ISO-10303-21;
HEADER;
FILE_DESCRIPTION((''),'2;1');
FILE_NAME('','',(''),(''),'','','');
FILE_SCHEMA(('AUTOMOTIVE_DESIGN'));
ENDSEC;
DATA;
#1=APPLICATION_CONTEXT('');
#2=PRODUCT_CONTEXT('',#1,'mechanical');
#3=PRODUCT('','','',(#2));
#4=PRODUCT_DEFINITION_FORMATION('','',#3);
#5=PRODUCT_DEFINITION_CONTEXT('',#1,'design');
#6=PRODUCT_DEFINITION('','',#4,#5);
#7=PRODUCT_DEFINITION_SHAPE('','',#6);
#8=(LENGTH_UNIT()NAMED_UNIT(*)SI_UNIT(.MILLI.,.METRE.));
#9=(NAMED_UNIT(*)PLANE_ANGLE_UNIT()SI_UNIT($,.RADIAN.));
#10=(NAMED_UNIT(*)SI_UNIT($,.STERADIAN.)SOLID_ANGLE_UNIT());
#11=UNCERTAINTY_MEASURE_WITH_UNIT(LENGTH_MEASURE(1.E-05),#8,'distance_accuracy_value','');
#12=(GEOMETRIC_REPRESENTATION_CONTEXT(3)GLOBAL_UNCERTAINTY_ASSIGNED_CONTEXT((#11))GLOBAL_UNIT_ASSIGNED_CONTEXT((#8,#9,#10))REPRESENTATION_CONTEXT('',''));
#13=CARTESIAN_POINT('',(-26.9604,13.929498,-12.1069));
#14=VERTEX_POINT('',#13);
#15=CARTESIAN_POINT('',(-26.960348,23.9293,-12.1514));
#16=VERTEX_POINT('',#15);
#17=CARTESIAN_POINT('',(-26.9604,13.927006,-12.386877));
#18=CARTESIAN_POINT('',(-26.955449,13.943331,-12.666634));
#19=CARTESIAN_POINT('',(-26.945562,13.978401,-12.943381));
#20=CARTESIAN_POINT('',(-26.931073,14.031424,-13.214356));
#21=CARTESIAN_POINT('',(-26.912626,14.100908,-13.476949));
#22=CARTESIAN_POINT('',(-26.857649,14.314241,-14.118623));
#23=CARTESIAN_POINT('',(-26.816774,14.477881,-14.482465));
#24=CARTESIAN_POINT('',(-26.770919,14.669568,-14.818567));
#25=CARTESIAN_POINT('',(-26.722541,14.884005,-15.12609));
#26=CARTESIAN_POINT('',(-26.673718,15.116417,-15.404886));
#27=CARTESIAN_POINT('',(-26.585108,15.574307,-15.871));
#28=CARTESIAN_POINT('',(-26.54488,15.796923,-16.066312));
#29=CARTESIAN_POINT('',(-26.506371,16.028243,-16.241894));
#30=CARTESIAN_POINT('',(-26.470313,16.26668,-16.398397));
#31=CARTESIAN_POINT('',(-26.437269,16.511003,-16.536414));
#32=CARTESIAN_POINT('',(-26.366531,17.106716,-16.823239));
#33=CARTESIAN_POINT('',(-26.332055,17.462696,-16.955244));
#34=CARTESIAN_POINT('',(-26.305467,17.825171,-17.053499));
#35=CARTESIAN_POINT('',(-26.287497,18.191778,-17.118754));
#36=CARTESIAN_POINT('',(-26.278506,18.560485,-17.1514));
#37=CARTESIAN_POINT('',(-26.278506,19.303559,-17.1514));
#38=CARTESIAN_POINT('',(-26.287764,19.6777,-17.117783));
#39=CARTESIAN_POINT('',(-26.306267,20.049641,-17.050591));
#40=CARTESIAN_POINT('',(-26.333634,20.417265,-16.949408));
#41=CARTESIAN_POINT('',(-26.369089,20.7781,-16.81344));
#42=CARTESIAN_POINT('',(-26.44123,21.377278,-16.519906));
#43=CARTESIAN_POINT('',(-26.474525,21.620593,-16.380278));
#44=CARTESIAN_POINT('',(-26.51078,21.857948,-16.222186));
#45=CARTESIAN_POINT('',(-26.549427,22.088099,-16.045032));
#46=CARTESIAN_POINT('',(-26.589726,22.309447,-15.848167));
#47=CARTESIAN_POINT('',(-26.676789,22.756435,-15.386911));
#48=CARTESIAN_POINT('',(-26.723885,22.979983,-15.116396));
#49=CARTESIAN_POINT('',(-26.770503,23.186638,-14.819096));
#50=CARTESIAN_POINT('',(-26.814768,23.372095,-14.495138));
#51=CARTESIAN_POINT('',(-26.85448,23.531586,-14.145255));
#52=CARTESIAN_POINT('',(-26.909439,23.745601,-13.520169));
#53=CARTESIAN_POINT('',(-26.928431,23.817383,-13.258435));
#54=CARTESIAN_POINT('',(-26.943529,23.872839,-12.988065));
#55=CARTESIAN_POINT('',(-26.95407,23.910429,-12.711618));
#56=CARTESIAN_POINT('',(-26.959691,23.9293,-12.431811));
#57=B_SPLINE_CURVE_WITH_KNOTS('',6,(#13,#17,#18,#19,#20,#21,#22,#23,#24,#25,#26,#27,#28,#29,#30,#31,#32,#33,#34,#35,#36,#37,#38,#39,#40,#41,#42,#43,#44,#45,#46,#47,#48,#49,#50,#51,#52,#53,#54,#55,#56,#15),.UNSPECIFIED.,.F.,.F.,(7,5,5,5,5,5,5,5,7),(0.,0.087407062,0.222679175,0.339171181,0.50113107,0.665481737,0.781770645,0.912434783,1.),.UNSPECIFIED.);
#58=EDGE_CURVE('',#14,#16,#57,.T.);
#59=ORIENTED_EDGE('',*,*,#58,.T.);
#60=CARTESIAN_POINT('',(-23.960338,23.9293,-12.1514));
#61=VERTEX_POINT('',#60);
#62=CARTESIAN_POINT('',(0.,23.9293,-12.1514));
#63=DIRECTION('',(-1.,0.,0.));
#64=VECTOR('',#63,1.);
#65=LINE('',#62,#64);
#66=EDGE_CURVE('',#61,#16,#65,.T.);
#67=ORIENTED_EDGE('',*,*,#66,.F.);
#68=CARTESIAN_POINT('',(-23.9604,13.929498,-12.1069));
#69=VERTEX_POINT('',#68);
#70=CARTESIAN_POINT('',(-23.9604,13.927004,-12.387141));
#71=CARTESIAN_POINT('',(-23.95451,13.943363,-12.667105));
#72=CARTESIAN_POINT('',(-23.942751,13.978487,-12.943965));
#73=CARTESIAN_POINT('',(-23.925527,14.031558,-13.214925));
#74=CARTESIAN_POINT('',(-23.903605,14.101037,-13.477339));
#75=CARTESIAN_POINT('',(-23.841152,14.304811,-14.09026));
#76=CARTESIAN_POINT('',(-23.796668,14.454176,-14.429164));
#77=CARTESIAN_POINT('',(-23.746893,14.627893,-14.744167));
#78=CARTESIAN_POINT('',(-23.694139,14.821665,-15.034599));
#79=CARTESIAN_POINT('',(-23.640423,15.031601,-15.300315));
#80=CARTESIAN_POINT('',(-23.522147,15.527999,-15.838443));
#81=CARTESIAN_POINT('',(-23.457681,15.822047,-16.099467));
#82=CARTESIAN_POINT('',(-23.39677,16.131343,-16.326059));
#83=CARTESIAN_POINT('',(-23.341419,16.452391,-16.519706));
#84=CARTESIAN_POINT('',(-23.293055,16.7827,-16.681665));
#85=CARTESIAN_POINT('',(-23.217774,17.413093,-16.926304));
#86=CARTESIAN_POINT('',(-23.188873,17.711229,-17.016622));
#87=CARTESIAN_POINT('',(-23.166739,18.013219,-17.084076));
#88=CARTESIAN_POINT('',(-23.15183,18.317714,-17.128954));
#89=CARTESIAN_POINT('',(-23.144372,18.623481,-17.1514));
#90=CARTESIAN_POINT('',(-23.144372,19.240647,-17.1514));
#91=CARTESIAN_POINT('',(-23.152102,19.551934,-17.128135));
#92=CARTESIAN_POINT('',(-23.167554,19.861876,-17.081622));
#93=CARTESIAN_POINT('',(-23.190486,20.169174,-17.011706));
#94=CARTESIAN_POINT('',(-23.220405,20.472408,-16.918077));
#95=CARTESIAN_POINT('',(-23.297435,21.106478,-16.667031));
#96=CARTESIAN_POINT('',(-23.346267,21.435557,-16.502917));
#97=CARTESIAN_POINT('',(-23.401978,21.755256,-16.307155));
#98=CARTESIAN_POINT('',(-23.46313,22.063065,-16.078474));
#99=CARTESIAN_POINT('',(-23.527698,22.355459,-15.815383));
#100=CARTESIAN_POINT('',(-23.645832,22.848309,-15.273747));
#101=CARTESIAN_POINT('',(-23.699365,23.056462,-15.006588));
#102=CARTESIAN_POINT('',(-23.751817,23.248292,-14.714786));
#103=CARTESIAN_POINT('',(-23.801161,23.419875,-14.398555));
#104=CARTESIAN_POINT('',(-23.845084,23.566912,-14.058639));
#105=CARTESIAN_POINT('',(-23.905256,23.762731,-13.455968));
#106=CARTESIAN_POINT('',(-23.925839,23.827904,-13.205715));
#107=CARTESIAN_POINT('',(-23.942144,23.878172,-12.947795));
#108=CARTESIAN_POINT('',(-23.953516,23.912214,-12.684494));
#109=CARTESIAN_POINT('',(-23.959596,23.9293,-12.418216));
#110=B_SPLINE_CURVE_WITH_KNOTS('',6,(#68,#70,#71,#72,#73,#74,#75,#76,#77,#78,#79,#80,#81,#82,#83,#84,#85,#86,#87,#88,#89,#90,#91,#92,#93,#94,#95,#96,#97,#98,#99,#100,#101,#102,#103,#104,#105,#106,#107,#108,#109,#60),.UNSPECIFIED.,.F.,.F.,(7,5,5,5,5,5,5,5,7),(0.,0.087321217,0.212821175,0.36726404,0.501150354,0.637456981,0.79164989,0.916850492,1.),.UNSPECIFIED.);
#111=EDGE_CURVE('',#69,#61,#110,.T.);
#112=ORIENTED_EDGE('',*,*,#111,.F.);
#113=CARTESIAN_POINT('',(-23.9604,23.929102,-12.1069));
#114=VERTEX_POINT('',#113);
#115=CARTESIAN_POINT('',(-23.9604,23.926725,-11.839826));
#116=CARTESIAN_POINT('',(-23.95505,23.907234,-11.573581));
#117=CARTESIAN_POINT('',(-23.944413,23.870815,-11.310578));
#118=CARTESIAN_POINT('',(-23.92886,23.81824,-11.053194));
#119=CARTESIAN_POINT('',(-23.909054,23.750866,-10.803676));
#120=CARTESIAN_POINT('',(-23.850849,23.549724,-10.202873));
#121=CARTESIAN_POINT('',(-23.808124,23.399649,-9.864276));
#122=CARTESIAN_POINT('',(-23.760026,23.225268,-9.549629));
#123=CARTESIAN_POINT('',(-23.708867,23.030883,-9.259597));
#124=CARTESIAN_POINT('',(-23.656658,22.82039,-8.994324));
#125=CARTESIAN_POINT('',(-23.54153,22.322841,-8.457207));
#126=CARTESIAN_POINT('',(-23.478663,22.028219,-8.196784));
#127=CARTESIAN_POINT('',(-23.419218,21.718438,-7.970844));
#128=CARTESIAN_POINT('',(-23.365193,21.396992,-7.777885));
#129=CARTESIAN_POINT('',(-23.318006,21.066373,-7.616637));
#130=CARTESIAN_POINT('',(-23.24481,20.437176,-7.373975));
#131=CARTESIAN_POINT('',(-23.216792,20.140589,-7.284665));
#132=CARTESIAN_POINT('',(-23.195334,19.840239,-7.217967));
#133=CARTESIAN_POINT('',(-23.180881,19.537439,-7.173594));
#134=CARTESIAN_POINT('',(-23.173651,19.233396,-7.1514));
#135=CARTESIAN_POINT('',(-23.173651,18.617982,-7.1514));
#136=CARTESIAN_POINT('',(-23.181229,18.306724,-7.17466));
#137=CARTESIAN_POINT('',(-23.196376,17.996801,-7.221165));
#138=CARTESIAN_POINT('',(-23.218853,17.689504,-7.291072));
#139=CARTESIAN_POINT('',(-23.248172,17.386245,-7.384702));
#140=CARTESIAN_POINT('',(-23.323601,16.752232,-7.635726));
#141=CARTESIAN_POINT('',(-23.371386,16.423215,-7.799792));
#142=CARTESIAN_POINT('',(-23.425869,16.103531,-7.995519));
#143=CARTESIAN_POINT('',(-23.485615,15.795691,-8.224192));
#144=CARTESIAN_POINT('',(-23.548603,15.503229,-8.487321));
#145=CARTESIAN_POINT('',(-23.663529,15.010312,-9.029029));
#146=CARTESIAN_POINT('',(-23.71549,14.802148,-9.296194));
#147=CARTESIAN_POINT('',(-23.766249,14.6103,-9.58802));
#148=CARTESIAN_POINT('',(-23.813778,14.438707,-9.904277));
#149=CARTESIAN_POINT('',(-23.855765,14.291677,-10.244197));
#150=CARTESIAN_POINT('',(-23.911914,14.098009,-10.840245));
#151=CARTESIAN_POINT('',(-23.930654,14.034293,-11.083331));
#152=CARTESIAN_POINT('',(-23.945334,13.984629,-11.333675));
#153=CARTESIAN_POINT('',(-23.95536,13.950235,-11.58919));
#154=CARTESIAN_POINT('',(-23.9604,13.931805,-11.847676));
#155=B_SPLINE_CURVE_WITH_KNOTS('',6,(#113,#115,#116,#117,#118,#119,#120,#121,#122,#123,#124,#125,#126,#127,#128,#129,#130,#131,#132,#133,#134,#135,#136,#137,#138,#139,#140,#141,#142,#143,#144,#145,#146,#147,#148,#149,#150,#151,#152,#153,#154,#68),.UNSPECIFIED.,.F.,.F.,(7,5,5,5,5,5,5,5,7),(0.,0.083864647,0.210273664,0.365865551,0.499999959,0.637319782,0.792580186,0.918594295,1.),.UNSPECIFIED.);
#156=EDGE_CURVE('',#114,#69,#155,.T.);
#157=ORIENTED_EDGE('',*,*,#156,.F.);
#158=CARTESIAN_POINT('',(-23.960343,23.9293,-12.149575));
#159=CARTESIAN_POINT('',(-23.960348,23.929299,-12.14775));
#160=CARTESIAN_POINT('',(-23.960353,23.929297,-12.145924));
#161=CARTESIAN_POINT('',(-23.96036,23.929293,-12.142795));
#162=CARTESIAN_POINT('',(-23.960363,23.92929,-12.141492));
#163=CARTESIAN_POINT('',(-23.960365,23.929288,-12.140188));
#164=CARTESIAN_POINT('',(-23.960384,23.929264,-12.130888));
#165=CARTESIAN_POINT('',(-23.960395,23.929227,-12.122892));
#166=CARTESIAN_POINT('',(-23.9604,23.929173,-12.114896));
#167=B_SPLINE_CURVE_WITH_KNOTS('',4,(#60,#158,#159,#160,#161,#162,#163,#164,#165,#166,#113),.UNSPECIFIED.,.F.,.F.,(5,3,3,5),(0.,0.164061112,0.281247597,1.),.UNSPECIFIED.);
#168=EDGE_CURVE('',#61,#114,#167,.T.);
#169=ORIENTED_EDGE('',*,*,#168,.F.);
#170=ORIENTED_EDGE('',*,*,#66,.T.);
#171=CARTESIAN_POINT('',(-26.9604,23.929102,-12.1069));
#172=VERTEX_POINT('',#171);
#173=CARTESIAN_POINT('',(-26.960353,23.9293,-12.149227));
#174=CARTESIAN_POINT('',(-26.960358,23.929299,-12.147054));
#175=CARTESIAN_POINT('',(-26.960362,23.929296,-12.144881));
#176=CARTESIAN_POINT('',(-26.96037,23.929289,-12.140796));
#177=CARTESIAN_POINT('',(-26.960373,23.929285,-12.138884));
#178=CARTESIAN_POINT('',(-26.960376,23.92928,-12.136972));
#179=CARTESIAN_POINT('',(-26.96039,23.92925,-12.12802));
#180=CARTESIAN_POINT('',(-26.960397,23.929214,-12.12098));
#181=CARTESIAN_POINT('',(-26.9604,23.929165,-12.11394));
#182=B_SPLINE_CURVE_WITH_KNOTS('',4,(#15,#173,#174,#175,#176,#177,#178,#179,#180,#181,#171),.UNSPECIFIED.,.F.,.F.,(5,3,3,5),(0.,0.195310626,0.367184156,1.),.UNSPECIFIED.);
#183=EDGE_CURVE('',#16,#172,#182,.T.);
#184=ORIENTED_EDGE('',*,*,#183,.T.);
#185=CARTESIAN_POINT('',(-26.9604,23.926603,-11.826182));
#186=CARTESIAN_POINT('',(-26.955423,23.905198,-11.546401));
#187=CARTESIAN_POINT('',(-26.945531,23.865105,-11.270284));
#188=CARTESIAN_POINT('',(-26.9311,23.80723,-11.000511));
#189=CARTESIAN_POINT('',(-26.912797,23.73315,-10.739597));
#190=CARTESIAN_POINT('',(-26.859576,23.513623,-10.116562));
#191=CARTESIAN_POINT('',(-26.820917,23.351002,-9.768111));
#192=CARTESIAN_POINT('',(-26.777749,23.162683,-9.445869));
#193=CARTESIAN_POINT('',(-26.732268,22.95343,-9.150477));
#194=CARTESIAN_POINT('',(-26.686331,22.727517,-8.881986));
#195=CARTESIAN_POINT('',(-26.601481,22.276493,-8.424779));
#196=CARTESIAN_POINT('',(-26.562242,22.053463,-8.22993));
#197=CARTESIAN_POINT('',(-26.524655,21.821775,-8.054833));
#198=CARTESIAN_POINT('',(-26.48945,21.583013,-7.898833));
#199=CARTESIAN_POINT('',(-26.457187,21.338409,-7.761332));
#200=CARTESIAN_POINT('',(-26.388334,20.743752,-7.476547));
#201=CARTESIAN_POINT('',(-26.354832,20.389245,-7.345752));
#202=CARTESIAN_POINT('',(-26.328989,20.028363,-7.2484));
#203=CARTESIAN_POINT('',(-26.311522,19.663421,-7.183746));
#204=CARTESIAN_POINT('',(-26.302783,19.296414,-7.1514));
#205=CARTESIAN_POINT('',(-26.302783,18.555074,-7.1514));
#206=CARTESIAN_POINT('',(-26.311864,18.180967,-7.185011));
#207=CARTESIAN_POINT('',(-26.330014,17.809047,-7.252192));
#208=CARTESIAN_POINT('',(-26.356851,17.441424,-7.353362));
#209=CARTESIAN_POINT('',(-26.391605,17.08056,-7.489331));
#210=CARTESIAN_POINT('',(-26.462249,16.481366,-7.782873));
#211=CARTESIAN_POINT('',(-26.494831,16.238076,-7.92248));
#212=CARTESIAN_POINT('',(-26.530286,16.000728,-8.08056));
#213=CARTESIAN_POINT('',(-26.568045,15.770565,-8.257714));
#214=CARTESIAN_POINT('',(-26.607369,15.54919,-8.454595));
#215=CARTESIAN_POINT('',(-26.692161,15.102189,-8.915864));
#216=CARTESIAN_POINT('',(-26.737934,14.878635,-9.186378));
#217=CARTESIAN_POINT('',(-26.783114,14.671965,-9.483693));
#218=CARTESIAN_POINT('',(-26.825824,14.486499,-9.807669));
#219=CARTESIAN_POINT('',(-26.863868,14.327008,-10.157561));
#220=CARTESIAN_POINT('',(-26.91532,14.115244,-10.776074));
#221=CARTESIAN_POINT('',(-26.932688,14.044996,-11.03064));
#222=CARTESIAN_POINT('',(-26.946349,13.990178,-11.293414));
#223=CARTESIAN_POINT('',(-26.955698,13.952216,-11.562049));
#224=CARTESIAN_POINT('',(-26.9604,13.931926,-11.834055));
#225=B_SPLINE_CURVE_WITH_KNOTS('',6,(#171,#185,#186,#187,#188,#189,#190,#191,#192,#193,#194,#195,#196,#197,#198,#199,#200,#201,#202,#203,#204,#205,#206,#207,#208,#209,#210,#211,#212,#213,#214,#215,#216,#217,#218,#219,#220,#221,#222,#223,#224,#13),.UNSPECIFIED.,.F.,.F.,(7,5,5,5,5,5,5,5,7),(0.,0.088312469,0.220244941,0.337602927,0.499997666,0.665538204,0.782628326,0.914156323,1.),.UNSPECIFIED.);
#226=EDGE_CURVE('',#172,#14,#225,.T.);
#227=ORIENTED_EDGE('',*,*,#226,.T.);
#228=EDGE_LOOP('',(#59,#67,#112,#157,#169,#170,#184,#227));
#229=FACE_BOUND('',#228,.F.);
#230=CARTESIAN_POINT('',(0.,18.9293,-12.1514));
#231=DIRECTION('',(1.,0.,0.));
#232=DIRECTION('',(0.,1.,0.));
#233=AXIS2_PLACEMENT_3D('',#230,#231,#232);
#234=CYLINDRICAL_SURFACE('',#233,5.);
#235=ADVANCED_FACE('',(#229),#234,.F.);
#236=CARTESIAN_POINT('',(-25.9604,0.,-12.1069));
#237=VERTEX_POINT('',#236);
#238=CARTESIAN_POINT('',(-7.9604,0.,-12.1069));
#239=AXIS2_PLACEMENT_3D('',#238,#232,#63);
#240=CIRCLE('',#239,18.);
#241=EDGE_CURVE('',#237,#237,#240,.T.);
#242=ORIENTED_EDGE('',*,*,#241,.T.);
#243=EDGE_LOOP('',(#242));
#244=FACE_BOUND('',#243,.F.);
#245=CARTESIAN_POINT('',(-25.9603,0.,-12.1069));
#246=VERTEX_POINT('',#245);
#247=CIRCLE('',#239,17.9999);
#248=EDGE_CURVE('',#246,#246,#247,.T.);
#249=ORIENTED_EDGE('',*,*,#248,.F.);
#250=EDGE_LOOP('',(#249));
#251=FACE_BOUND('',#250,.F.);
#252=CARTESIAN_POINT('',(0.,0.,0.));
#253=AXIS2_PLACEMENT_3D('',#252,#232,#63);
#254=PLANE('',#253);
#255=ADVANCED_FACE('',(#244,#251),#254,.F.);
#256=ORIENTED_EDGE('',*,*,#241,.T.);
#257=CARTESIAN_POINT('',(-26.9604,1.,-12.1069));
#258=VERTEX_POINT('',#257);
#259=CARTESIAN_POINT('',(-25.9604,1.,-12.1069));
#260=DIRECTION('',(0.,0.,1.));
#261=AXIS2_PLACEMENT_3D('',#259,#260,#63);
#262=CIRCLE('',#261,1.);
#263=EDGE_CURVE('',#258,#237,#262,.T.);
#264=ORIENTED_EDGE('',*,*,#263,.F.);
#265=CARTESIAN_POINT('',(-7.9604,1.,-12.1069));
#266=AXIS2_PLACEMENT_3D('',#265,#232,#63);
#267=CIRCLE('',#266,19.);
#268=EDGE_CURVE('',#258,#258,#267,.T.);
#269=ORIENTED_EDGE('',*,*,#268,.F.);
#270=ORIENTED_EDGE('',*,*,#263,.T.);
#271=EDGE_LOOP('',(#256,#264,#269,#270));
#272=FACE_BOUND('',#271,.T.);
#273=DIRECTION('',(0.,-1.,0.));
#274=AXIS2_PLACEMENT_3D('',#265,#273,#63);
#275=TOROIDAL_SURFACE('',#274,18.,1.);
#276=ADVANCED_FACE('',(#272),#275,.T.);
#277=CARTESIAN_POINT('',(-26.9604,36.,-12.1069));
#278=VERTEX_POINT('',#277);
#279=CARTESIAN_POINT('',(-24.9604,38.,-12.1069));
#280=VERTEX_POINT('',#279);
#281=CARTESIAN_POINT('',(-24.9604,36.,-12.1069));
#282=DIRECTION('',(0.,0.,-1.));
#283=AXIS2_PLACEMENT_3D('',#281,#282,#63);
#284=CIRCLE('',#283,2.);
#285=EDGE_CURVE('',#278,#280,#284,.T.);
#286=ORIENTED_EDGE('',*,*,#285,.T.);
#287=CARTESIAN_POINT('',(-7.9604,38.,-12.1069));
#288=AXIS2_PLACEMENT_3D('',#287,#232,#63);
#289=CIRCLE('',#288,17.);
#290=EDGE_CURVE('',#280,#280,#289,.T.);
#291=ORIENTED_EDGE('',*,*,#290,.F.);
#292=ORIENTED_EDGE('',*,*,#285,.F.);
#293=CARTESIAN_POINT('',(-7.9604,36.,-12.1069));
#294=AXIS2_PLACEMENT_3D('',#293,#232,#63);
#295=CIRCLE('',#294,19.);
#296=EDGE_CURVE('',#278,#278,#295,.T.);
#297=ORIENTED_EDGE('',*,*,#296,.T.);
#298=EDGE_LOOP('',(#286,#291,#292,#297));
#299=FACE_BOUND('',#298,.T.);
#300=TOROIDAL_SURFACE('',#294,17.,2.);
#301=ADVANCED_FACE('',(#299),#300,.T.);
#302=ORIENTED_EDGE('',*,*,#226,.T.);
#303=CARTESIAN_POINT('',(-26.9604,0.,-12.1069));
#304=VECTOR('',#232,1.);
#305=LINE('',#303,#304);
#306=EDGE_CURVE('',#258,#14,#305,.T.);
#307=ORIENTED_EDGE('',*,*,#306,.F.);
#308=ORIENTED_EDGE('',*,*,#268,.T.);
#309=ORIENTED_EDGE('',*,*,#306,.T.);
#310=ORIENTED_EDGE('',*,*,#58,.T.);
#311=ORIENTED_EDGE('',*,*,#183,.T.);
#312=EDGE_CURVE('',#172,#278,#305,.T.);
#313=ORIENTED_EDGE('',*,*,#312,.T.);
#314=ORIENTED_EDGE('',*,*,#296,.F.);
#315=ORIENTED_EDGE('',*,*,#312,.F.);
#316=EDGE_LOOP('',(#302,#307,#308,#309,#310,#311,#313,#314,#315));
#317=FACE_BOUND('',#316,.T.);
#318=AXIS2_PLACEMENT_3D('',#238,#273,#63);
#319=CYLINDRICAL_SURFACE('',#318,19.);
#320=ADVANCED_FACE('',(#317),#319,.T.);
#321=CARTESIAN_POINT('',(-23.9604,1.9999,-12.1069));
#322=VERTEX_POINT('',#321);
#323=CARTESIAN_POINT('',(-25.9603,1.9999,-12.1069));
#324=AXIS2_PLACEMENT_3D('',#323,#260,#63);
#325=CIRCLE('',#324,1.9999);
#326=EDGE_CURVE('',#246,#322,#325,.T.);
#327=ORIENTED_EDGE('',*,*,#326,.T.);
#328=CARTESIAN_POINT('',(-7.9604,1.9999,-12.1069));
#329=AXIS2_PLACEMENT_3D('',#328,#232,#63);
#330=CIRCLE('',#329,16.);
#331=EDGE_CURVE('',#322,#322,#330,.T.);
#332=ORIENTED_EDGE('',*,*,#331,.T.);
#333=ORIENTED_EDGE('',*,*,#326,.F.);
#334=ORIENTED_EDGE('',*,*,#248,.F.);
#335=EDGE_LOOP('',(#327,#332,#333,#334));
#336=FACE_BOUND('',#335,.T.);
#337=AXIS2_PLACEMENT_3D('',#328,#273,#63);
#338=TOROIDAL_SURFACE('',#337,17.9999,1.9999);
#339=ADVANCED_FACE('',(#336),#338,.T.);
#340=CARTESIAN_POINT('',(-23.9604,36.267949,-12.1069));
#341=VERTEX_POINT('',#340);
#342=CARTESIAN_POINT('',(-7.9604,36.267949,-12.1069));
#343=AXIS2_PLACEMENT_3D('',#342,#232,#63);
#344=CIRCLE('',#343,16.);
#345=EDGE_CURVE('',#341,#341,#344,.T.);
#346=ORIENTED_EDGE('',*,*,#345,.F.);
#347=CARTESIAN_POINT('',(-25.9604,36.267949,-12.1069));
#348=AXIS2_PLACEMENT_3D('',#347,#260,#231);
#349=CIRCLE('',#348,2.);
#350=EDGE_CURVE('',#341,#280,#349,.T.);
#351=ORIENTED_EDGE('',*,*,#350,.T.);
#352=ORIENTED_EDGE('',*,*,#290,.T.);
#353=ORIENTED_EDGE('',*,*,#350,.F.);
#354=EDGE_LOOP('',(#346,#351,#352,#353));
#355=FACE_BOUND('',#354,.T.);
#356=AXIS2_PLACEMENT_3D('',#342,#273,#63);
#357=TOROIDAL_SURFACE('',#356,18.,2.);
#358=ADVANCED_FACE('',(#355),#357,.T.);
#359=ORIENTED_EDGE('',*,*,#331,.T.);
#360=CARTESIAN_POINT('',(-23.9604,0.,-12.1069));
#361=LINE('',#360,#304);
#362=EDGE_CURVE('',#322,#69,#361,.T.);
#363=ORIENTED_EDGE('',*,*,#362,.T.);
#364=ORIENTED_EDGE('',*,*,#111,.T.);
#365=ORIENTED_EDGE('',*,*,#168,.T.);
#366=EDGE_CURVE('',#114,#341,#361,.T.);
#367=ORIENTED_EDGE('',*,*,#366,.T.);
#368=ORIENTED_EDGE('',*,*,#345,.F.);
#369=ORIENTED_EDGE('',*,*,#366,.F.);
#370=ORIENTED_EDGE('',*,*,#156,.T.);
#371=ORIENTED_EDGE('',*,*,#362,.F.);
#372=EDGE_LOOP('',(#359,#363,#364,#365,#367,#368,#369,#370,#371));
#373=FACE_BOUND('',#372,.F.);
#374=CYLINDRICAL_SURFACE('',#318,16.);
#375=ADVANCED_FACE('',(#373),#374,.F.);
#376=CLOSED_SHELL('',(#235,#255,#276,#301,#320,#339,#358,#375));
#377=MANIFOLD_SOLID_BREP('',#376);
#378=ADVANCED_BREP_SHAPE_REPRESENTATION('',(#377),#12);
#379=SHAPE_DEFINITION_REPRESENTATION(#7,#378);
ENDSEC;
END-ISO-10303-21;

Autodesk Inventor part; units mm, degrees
ref_plane "YZ Plane" through (0, 0, 0) normal (1, 0, 0) x (0, 1, 0)
ref_plane "XZ Plane" through (0, 0, 0) normal (0, 1, 0) x (-1, 0, 0)
ref_plane "XY Plane" through (0, 0, 0) normal (0, 0, 1) x (1, 0, 0)
sketch "Sketch1" plane through (0, 0, 0) normal (0, 1, 0) x (-1, 0, 0)
  circle A0 centre (7.9604, -12.1069) radius 19
  circle A1 centre (7.9604, -12.1069) radius 16
  point P0 (0, 0)
  dimension "d0" = 38
  dimension "d1" = 32
extrude "Extrusion1" add sketch "Sketch1" along normal blind 38
fillet "Fillet1" radius 2 2 edges at (11.0396, 38, -12.1069) (8.0396, 38, -12.1069)
fillet "Fillet2" radius 1 1 edges at (11.0396, 0, -12.1069)
fillet "Fillet3" radius 2 1 edges at (8.0396, 0, -12.1069)
sketch "Sketch2" plane through (0, 0, 0) normal (1, 0, 0) x (0, 1, 0)
  line L0 (39.783, 8.7002) -> (-1.9245, -33.003)
  circle A0 centre (18.9293, -12.1514) radius 5
  point P0 (0, 0)
  dimension "d7" = 10
extrude "Extrusion2" cut sketch "Sketch2" against normal blind 38
properties part number "BUCHA"
